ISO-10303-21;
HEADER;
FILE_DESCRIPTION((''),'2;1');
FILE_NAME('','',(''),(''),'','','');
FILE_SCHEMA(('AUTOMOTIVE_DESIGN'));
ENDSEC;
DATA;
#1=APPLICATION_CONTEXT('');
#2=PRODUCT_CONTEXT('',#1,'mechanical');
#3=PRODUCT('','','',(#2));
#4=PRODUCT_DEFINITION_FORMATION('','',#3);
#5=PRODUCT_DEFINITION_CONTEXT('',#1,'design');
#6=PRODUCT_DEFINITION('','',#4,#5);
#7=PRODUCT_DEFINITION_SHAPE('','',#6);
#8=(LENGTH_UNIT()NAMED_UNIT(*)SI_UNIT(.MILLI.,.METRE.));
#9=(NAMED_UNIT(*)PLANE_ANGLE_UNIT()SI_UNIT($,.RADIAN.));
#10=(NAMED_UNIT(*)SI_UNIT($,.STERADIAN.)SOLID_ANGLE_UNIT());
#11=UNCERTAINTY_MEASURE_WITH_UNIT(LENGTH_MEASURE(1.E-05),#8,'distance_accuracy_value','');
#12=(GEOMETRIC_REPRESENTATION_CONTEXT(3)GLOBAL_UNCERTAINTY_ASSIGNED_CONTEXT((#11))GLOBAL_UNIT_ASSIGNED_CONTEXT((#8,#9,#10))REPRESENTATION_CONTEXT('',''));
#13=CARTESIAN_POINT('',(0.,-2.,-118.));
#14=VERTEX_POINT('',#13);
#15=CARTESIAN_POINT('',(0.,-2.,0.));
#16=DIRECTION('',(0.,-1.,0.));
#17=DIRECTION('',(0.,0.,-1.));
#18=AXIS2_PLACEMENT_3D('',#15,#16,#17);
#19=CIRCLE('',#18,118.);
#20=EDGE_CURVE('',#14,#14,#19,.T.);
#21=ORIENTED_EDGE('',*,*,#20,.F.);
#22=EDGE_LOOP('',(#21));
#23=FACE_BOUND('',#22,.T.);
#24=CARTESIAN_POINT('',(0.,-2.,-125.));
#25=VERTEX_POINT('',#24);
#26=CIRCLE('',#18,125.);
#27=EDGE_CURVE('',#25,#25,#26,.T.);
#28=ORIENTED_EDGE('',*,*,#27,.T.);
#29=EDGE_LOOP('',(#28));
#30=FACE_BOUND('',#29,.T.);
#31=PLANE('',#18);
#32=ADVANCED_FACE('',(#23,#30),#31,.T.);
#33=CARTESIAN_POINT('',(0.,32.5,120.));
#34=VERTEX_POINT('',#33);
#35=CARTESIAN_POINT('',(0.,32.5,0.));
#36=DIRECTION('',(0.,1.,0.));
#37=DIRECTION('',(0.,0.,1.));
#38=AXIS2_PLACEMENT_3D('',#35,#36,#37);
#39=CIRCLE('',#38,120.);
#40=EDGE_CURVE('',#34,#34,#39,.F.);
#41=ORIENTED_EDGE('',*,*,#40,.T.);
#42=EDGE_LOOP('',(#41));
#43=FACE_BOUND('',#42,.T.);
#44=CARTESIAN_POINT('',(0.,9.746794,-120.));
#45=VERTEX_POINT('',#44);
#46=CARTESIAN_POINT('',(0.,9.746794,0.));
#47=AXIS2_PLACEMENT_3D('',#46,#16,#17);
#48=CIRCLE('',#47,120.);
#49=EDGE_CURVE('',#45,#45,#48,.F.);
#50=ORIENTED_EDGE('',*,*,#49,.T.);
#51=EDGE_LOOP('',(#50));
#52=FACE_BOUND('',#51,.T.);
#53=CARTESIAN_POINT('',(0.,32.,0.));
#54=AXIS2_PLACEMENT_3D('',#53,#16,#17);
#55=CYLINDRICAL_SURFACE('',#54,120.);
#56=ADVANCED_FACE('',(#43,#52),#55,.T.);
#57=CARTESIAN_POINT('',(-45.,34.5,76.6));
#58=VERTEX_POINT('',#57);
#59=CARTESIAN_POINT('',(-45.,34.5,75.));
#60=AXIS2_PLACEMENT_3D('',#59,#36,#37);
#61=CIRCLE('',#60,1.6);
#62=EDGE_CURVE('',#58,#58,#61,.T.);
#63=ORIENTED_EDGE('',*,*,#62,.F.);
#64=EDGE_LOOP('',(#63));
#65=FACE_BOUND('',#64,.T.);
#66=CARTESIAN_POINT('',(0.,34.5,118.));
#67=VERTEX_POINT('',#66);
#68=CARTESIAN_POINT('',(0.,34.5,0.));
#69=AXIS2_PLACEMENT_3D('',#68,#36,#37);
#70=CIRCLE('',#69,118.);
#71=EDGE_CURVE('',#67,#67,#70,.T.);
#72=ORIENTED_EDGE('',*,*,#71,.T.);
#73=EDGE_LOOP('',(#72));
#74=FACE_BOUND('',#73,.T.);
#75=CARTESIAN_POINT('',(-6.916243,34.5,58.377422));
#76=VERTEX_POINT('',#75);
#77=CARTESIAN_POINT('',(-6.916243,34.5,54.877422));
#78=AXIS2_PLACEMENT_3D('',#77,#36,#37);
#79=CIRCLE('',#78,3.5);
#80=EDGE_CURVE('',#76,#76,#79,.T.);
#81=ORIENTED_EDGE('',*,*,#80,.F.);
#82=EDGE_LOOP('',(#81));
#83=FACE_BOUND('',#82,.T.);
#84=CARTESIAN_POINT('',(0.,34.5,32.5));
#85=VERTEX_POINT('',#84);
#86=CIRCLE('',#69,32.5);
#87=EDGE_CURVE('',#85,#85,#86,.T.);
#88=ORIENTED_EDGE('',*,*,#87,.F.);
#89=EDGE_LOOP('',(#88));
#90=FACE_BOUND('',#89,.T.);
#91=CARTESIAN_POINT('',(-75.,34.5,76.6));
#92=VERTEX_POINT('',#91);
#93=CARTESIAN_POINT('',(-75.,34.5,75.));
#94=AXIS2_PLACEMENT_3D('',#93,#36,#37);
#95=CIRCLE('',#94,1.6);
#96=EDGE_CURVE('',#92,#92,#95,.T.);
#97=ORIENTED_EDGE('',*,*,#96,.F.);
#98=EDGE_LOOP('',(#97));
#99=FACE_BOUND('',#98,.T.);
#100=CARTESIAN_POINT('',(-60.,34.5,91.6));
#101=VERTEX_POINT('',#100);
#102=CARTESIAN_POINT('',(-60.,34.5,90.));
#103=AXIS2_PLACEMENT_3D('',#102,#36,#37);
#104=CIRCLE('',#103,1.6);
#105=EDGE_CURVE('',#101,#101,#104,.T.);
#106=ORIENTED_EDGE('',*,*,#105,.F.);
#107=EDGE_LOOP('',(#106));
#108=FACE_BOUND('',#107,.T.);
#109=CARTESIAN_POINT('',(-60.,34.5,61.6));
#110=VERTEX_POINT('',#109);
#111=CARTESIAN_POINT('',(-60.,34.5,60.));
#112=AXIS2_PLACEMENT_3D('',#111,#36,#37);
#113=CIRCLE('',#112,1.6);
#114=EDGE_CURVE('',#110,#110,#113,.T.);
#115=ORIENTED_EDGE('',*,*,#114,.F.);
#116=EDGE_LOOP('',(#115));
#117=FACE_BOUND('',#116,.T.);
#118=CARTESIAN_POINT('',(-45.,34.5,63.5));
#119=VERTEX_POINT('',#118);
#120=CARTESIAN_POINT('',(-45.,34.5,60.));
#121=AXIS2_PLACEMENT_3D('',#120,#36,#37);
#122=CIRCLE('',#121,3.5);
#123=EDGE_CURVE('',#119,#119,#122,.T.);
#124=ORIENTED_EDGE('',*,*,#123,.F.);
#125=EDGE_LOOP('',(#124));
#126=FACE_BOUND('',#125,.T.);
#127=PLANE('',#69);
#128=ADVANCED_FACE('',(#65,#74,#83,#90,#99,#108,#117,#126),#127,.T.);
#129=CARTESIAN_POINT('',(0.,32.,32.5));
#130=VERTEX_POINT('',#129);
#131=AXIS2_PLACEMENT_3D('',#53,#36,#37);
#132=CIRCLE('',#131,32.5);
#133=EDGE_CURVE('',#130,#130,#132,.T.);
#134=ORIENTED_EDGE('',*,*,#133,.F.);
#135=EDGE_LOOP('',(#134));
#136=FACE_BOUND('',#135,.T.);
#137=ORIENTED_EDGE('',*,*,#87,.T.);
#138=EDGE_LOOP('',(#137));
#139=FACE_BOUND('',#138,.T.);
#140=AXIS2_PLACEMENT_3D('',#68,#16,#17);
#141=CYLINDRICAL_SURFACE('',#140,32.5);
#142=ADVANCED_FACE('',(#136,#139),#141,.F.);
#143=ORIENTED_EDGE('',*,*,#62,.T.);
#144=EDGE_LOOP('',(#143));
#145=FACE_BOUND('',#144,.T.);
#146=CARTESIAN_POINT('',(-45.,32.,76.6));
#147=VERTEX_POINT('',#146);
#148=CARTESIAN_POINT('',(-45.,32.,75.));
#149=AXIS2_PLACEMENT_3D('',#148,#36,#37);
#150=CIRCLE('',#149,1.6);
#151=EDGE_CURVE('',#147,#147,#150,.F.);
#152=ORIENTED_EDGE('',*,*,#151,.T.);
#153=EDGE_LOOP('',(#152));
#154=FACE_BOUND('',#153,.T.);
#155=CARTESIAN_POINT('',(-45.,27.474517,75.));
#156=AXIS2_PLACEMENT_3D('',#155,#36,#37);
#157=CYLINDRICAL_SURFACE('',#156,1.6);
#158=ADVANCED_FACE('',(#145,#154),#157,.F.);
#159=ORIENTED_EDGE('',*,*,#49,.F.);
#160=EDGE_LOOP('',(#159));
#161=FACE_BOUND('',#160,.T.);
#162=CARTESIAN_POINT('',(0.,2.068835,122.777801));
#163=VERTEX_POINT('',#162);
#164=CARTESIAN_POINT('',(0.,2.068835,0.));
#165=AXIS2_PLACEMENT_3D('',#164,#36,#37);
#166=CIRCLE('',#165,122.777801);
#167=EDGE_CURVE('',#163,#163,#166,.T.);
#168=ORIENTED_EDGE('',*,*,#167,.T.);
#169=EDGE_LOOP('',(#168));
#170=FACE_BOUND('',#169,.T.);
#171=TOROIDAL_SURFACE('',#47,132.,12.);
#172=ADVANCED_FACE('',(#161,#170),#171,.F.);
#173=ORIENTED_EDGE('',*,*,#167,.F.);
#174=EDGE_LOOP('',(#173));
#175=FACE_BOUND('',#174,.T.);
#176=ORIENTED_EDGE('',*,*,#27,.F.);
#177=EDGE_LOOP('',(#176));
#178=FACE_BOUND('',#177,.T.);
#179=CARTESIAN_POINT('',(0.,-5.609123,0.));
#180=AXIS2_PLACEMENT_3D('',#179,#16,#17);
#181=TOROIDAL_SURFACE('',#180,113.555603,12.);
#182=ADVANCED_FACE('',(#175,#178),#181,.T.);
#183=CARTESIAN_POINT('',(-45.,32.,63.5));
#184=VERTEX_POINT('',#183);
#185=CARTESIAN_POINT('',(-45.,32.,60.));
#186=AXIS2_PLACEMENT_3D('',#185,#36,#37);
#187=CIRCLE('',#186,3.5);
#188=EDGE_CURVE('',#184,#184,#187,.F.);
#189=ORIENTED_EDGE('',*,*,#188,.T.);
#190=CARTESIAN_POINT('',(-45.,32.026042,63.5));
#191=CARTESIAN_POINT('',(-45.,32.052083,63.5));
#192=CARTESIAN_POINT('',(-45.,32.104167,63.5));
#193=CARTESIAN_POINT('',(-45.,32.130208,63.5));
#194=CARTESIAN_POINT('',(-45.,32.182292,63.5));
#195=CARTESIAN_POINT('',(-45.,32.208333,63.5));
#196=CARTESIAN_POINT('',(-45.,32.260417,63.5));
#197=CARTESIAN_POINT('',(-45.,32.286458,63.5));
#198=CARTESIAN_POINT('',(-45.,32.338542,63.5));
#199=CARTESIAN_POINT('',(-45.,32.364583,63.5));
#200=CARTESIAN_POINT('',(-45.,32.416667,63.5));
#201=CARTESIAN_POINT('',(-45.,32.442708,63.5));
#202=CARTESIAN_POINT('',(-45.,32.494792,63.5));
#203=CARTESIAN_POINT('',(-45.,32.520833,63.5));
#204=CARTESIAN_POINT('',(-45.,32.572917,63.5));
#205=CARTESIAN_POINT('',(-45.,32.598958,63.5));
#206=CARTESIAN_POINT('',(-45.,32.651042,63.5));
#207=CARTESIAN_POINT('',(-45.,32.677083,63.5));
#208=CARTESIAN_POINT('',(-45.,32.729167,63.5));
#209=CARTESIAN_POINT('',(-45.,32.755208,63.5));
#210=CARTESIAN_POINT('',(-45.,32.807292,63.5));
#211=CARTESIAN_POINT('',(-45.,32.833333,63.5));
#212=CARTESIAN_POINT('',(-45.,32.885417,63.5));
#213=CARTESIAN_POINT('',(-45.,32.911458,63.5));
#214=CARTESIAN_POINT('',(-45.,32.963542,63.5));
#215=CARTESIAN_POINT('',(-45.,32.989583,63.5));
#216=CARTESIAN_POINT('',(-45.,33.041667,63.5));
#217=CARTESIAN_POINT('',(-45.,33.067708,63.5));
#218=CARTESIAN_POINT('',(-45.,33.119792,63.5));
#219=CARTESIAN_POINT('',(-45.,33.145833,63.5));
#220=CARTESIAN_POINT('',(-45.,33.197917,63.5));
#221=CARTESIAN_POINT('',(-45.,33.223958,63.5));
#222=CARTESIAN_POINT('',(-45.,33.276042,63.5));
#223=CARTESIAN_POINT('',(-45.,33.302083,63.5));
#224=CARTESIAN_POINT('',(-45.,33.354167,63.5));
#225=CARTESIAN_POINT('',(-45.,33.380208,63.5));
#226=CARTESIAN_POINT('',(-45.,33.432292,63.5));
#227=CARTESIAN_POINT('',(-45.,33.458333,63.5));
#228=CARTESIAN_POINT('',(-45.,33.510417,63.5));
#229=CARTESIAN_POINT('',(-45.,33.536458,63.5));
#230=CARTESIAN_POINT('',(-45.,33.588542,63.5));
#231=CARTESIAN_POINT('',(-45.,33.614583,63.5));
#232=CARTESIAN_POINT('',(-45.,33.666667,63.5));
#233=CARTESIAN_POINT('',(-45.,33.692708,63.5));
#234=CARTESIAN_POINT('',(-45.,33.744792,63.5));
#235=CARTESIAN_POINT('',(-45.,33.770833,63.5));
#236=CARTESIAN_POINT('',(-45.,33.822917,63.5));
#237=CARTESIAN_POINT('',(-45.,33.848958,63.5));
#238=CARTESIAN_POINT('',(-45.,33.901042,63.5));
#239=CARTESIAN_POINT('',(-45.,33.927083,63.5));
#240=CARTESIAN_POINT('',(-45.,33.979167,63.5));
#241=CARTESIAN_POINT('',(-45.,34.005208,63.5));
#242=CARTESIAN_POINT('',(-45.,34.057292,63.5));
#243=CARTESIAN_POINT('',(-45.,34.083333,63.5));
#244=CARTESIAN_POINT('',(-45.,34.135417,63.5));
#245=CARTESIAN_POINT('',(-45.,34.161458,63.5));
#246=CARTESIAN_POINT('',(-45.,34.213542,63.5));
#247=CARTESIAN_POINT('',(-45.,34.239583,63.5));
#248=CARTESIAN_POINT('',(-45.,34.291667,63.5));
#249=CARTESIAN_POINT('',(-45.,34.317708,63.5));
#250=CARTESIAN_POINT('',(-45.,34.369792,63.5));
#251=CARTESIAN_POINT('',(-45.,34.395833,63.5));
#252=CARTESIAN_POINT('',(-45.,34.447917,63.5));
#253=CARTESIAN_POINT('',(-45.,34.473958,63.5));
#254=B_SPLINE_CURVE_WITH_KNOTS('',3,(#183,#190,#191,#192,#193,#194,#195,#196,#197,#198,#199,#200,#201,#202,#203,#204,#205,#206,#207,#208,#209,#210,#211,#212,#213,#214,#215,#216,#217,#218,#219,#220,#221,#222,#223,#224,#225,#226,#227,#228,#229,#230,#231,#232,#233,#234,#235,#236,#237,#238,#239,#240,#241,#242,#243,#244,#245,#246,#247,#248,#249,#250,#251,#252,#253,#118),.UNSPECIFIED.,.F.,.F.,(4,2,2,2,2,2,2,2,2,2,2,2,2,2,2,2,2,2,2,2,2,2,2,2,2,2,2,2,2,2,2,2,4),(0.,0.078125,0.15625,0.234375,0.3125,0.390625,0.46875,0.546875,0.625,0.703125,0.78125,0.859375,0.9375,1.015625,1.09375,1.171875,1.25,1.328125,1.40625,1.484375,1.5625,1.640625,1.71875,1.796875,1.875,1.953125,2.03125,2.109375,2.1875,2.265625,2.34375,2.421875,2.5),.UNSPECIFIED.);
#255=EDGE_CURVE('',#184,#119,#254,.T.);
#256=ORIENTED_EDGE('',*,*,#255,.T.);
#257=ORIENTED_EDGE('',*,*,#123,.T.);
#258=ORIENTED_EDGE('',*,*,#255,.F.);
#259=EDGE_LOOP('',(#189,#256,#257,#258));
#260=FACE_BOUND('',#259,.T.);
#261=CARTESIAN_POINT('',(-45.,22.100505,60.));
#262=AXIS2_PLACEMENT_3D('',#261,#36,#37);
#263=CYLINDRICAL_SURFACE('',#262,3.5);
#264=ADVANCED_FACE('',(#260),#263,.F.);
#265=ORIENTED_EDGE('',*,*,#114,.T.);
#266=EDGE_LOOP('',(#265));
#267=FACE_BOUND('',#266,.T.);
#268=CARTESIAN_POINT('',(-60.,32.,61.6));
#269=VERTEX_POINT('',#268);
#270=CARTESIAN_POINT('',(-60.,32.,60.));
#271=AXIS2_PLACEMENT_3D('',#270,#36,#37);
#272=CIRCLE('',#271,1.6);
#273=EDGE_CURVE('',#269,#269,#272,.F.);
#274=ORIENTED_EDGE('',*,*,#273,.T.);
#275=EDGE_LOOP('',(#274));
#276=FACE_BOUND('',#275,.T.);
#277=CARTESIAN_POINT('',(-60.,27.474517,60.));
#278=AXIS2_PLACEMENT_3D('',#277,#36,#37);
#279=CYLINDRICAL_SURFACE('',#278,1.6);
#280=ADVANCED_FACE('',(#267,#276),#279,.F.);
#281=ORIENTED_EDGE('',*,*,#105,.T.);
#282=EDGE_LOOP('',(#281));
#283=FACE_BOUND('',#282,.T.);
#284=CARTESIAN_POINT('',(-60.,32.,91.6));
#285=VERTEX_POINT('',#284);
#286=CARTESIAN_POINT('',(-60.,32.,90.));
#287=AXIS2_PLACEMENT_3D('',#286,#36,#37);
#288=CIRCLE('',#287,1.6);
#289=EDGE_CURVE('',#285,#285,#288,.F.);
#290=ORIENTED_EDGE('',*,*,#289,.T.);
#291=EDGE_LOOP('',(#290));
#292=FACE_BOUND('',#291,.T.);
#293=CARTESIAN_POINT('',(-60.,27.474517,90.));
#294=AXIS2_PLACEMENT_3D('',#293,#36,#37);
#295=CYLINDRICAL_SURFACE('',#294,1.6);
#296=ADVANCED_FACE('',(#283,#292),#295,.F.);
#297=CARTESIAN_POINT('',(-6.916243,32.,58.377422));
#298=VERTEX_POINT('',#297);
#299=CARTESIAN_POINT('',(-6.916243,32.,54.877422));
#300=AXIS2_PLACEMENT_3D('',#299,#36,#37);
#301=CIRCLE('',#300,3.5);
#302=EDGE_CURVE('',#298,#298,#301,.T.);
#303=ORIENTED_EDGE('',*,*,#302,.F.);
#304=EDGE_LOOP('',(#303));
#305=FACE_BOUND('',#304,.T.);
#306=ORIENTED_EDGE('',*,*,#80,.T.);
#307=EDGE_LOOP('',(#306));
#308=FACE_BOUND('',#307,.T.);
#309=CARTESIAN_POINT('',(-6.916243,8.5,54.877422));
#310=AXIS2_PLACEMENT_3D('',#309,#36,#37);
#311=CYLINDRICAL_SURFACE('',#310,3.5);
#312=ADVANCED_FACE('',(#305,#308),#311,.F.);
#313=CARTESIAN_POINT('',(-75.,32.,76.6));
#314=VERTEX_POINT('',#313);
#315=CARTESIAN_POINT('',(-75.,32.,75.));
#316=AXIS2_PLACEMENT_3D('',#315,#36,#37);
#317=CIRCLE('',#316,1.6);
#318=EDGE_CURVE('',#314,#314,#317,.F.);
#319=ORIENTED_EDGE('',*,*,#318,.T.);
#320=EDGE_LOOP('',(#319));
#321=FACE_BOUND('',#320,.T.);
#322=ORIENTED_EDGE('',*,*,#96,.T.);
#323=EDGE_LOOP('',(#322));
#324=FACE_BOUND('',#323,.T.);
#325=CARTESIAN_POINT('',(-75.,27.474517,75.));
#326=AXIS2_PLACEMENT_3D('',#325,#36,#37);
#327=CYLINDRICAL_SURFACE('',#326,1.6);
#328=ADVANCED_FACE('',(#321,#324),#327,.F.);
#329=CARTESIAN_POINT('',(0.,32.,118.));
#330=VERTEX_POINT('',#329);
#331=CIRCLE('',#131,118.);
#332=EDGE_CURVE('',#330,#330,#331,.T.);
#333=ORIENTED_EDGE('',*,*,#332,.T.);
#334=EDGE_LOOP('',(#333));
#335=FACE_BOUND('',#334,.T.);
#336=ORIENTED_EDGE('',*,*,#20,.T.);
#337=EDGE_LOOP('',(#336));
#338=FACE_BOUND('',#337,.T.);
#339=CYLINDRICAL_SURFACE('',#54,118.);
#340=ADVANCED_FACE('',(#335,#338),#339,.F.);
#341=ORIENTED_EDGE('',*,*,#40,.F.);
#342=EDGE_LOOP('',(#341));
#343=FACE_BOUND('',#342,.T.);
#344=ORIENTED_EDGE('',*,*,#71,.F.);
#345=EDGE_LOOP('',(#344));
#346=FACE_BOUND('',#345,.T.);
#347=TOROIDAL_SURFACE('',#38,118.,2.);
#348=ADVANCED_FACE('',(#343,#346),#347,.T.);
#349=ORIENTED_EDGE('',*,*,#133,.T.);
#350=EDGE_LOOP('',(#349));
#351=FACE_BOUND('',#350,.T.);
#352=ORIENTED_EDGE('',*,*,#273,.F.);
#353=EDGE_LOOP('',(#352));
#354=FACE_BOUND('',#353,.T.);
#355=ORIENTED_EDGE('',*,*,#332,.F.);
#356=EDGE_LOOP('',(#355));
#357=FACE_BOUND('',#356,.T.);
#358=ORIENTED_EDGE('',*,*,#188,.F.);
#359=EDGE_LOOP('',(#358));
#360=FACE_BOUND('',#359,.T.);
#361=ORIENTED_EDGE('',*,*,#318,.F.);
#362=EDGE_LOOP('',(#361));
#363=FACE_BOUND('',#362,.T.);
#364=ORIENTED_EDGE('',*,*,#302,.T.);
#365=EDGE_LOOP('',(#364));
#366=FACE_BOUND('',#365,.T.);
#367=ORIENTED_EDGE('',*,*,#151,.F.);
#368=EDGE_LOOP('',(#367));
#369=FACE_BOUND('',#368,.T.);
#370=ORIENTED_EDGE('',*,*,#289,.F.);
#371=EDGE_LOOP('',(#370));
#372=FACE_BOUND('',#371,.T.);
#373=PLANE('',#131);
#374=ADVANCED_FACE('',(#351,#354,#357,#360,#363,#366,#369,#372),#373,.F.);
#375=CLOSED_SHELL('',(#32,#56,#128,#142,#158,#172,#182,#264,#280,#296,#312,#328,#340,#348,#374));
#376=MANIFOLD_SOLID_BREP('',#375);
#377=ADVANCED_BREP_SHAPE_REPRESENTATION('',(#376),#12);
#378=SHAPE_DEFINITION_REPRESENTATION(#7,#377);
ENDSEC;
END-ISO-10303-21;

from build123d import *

# Parameters (mm, degrees)
SKETCH1_R           = 120
SKETCH1_R_2         = 118
BOSS_EXTRUDE1_DEPTH = 32
SKETCH2_R           = 120
SKETCH2_R_2         = 32.5
BOSS_EXTRUDE2_DEPTH = 2.5
SKETCH3_R           = 1.6
CUT_EXTRUDE1_DEPTH  = 2.5
SKETCH4_R           = 3.5
CUT_EXTRUDE2_DEPTH  = 2.5
FILLET1_R           = 2
BOSS_EXTRUDE3_START = 2
SKETCH5_R           = 125
SKETCH5_R_2         = 118
BOSS_EXTRUDE3_DEPTH = 2
FILLET2_R           = 12
FILLET3_R           = 12
SKETCH6_R           = 3.5
CUT_EXTRUDE3_DEPTH  = 26


with BuildPart() as part:
    # Sketch1 → Boss-Extrude1 (new body)
    with BuildSketch(Plane(origin=(0, 0, 0), x_dir=(1, 0, 0), z_dir=(0, 1, 0))):
        with Locations(Location((0, 0, 0), (0, 0, 270))):
            Circle(SKETCH1_R)
        with Locations(Location((0, 0, 0), (0, 0, 270))):
            Circle(SKETCH1_R_2, mode=Mode.SUBTRACT)
    extrude(amount=BOSS_EXTRUDE1_DEPTH)

    # Sketch2 → Boss-Extrude2 (add)
    with BuildSketch(Plane(origin=(0, 32, 0), x_dir=(1, 0, 0), z_dir=(0, 1, 0))):
        with Locations(Location((0, 0, 0), (0, 0, 270))):
            Circle(SKETCH2_R)
        with Locations(Location((0, 0, 0), (0, 0, 270))):
            Circle(SKETCH2_R_2, mode=Mode.SUBTRACT)
    extrude(amount=BOSS_EXTRUDE2_DEPTH)

    # Sketch3 → Cut-Extrude1 (cut)
    with BuildSketch(Plane(origin=(0, 34.5, 0), x_dir=(1, 0, 0), z_dir=(0, 1, 0))):
        with Locations(Location((-75, -75, 0), (0, 0, 270))):
            Circle(SKETCH3_R)
        with Locations(Location((-60, -60, 0), (0, 0, 270))):
            Circle(SKETCH3_R)
        with Locations(Location((-45, -75, 0), (0, 0, 270))):
            Circle(SKETCH3_R)
        with Locations(Location((-60, -90, 0), (0, 0, 270))):
            Circle(SKETCH3_R)
    extrude(amount=-CUT_EXTRUDE1_DEPTH, mode=Mode.SUBTRACT)

    # Sketch4 → Cut-Extrude2 (cut)
    with BuildSketch(Plane(origin=(0, 34.5, 0), x_dir=(1, 0, 0), z_dir=(0, 1, 0))):
        with Locations(Location((-45, -60, 0), (0, 0, 270))):
            Circle(SKETCH4_R)
    extrude(amount=-CUT_EXTRUDE2_DEPTH, mode=Mode.SUBTRACT)

    # Fillet1
    fillet1_edges = [part.edges().sort_by_distance(p)[0] for p in [
        (0, 34.5, -120),
    ]]
    fillet(fillet1_edges, radius=FILLET1_R)

    # Sketch5 → Boss-Extrude3 (add)
    with BuildSketch(Plane.XZ.offset(BOSS_EXTRUDE3_START)):
        with Locations(Location((0, 0, 0), (0, 0, 270))):
            Circle(SKETCH5_R)
        with Locations(Location((0, 0, 0), (0, 0, 270))):
            Circle(SKETCH5_R_2, mode=Mode.SUBTRACT)
    extrude(amount=-BOSS_EXTRUDE3_DEPTH)

    # Fillet2
    # the kernel refuses this fillet: 12 mm, written as the material it adds along each edge
    with BuildSketch(Plane(origin=(0, 0, 0), x_dir=(0, 0, 1), z_dir=(-1, 0, 0))) as fillet2_piece_1:
        with BuildLine():
            CenterArc((132, 9.746794345), FILLET2_R, 180, 54.314665287)
            Line((125, 0), (124.86, -0.194935887))
            ThreePointArc((124.86, -0.194935887), (122.5, -0.24), (120, -0.24))
            Line((120, -0.24), (119.76, 0))
            Line((119.76, 0), (119.76, 9.746794345))
            Line((119.76, 9.746794345), (120, 9.746794345))
        make_face()
    revolve(axis=Axis((0, 0, 0), (0, 1, 0)))

    # Fillet3
    # the kernel refuses this fillet: 12 mm, written as the material it takes off along each edge
    with BuildSketch(Plane(origin=(0, 0, 0), x_dir=(0, 0, -1), z_dir=(-1, 0, 0))) as fillet3_piece_1:
        with BuildLine():
            CenterArc((113.555602764, 5.609123427), FILLET3_R, 320.220862726, 22.275863923)
            Line((125, 2), (125.228887945, 1.927817531))
            ThreePointArc((125.228887945, 1.927817531), (125.24, 1), (125.24, 0))
            Line((125.24, 0), (125.14, -0.194935887))
            ThreePointArc((125.14, -0.194935887), (123.986742364, -1.139512424), (122.962245354, -2.222394637))
            Line((122.962245354, -2.222394637), (122.777801382, -2.068835459))
        make_face()
    revolve(axis=Axis((0, 0, 0), (0, -1, 0)), revolution_arc=180, mode=Mode.SUBTRACT)
    with BuildSketch(Plane(origin=(0, 0, 0), x_dir=(0, 0, 1), z_dir=(1, 0, 0))) as fillet3_piece_2:
        with BuildLine():
            CenterArc((113.555602764, 5.609123427), FILLET3_R, 320.220862726, 22.275863923)
            Line((125, 2), (125.228887945, 1.927817531))
            ThreePointArc((125.228887945, 1.927817531), (125.24, 1), (125.24, 0))
            Line((125.24, 0), (125.14, -0.194935887))
            ThreePointArc((125.14, -0.194935887), (123.986742364, -1.139512424), (122.962245354, -2.222394637))
            Line((122.962245354, -2.222394637), (122.777801382, -2.068835459))
        make_face()
    revolve(axis=Axis((0, 0, 0), (0, -1, 0)), revolution_arc=180, mode=Mode.SUBTRACT)

    # Sketch6 → Cut-Extrude3 (cut)
    with BuildSketch(Plane(origin=(0, 34.5, 0), x_dir=(1, 0, 0), z_dir=(0, 1, 0))):
        with Locations(Location((-6.916242645, -54.877422457, 0), (0, 0, 270))):
            Circle(SKETCH6_R)
    extrude(amount=-CUT_EXTRUDE3_DEPTH, mode=Mode.SUBTRACT)


solid = part.part
